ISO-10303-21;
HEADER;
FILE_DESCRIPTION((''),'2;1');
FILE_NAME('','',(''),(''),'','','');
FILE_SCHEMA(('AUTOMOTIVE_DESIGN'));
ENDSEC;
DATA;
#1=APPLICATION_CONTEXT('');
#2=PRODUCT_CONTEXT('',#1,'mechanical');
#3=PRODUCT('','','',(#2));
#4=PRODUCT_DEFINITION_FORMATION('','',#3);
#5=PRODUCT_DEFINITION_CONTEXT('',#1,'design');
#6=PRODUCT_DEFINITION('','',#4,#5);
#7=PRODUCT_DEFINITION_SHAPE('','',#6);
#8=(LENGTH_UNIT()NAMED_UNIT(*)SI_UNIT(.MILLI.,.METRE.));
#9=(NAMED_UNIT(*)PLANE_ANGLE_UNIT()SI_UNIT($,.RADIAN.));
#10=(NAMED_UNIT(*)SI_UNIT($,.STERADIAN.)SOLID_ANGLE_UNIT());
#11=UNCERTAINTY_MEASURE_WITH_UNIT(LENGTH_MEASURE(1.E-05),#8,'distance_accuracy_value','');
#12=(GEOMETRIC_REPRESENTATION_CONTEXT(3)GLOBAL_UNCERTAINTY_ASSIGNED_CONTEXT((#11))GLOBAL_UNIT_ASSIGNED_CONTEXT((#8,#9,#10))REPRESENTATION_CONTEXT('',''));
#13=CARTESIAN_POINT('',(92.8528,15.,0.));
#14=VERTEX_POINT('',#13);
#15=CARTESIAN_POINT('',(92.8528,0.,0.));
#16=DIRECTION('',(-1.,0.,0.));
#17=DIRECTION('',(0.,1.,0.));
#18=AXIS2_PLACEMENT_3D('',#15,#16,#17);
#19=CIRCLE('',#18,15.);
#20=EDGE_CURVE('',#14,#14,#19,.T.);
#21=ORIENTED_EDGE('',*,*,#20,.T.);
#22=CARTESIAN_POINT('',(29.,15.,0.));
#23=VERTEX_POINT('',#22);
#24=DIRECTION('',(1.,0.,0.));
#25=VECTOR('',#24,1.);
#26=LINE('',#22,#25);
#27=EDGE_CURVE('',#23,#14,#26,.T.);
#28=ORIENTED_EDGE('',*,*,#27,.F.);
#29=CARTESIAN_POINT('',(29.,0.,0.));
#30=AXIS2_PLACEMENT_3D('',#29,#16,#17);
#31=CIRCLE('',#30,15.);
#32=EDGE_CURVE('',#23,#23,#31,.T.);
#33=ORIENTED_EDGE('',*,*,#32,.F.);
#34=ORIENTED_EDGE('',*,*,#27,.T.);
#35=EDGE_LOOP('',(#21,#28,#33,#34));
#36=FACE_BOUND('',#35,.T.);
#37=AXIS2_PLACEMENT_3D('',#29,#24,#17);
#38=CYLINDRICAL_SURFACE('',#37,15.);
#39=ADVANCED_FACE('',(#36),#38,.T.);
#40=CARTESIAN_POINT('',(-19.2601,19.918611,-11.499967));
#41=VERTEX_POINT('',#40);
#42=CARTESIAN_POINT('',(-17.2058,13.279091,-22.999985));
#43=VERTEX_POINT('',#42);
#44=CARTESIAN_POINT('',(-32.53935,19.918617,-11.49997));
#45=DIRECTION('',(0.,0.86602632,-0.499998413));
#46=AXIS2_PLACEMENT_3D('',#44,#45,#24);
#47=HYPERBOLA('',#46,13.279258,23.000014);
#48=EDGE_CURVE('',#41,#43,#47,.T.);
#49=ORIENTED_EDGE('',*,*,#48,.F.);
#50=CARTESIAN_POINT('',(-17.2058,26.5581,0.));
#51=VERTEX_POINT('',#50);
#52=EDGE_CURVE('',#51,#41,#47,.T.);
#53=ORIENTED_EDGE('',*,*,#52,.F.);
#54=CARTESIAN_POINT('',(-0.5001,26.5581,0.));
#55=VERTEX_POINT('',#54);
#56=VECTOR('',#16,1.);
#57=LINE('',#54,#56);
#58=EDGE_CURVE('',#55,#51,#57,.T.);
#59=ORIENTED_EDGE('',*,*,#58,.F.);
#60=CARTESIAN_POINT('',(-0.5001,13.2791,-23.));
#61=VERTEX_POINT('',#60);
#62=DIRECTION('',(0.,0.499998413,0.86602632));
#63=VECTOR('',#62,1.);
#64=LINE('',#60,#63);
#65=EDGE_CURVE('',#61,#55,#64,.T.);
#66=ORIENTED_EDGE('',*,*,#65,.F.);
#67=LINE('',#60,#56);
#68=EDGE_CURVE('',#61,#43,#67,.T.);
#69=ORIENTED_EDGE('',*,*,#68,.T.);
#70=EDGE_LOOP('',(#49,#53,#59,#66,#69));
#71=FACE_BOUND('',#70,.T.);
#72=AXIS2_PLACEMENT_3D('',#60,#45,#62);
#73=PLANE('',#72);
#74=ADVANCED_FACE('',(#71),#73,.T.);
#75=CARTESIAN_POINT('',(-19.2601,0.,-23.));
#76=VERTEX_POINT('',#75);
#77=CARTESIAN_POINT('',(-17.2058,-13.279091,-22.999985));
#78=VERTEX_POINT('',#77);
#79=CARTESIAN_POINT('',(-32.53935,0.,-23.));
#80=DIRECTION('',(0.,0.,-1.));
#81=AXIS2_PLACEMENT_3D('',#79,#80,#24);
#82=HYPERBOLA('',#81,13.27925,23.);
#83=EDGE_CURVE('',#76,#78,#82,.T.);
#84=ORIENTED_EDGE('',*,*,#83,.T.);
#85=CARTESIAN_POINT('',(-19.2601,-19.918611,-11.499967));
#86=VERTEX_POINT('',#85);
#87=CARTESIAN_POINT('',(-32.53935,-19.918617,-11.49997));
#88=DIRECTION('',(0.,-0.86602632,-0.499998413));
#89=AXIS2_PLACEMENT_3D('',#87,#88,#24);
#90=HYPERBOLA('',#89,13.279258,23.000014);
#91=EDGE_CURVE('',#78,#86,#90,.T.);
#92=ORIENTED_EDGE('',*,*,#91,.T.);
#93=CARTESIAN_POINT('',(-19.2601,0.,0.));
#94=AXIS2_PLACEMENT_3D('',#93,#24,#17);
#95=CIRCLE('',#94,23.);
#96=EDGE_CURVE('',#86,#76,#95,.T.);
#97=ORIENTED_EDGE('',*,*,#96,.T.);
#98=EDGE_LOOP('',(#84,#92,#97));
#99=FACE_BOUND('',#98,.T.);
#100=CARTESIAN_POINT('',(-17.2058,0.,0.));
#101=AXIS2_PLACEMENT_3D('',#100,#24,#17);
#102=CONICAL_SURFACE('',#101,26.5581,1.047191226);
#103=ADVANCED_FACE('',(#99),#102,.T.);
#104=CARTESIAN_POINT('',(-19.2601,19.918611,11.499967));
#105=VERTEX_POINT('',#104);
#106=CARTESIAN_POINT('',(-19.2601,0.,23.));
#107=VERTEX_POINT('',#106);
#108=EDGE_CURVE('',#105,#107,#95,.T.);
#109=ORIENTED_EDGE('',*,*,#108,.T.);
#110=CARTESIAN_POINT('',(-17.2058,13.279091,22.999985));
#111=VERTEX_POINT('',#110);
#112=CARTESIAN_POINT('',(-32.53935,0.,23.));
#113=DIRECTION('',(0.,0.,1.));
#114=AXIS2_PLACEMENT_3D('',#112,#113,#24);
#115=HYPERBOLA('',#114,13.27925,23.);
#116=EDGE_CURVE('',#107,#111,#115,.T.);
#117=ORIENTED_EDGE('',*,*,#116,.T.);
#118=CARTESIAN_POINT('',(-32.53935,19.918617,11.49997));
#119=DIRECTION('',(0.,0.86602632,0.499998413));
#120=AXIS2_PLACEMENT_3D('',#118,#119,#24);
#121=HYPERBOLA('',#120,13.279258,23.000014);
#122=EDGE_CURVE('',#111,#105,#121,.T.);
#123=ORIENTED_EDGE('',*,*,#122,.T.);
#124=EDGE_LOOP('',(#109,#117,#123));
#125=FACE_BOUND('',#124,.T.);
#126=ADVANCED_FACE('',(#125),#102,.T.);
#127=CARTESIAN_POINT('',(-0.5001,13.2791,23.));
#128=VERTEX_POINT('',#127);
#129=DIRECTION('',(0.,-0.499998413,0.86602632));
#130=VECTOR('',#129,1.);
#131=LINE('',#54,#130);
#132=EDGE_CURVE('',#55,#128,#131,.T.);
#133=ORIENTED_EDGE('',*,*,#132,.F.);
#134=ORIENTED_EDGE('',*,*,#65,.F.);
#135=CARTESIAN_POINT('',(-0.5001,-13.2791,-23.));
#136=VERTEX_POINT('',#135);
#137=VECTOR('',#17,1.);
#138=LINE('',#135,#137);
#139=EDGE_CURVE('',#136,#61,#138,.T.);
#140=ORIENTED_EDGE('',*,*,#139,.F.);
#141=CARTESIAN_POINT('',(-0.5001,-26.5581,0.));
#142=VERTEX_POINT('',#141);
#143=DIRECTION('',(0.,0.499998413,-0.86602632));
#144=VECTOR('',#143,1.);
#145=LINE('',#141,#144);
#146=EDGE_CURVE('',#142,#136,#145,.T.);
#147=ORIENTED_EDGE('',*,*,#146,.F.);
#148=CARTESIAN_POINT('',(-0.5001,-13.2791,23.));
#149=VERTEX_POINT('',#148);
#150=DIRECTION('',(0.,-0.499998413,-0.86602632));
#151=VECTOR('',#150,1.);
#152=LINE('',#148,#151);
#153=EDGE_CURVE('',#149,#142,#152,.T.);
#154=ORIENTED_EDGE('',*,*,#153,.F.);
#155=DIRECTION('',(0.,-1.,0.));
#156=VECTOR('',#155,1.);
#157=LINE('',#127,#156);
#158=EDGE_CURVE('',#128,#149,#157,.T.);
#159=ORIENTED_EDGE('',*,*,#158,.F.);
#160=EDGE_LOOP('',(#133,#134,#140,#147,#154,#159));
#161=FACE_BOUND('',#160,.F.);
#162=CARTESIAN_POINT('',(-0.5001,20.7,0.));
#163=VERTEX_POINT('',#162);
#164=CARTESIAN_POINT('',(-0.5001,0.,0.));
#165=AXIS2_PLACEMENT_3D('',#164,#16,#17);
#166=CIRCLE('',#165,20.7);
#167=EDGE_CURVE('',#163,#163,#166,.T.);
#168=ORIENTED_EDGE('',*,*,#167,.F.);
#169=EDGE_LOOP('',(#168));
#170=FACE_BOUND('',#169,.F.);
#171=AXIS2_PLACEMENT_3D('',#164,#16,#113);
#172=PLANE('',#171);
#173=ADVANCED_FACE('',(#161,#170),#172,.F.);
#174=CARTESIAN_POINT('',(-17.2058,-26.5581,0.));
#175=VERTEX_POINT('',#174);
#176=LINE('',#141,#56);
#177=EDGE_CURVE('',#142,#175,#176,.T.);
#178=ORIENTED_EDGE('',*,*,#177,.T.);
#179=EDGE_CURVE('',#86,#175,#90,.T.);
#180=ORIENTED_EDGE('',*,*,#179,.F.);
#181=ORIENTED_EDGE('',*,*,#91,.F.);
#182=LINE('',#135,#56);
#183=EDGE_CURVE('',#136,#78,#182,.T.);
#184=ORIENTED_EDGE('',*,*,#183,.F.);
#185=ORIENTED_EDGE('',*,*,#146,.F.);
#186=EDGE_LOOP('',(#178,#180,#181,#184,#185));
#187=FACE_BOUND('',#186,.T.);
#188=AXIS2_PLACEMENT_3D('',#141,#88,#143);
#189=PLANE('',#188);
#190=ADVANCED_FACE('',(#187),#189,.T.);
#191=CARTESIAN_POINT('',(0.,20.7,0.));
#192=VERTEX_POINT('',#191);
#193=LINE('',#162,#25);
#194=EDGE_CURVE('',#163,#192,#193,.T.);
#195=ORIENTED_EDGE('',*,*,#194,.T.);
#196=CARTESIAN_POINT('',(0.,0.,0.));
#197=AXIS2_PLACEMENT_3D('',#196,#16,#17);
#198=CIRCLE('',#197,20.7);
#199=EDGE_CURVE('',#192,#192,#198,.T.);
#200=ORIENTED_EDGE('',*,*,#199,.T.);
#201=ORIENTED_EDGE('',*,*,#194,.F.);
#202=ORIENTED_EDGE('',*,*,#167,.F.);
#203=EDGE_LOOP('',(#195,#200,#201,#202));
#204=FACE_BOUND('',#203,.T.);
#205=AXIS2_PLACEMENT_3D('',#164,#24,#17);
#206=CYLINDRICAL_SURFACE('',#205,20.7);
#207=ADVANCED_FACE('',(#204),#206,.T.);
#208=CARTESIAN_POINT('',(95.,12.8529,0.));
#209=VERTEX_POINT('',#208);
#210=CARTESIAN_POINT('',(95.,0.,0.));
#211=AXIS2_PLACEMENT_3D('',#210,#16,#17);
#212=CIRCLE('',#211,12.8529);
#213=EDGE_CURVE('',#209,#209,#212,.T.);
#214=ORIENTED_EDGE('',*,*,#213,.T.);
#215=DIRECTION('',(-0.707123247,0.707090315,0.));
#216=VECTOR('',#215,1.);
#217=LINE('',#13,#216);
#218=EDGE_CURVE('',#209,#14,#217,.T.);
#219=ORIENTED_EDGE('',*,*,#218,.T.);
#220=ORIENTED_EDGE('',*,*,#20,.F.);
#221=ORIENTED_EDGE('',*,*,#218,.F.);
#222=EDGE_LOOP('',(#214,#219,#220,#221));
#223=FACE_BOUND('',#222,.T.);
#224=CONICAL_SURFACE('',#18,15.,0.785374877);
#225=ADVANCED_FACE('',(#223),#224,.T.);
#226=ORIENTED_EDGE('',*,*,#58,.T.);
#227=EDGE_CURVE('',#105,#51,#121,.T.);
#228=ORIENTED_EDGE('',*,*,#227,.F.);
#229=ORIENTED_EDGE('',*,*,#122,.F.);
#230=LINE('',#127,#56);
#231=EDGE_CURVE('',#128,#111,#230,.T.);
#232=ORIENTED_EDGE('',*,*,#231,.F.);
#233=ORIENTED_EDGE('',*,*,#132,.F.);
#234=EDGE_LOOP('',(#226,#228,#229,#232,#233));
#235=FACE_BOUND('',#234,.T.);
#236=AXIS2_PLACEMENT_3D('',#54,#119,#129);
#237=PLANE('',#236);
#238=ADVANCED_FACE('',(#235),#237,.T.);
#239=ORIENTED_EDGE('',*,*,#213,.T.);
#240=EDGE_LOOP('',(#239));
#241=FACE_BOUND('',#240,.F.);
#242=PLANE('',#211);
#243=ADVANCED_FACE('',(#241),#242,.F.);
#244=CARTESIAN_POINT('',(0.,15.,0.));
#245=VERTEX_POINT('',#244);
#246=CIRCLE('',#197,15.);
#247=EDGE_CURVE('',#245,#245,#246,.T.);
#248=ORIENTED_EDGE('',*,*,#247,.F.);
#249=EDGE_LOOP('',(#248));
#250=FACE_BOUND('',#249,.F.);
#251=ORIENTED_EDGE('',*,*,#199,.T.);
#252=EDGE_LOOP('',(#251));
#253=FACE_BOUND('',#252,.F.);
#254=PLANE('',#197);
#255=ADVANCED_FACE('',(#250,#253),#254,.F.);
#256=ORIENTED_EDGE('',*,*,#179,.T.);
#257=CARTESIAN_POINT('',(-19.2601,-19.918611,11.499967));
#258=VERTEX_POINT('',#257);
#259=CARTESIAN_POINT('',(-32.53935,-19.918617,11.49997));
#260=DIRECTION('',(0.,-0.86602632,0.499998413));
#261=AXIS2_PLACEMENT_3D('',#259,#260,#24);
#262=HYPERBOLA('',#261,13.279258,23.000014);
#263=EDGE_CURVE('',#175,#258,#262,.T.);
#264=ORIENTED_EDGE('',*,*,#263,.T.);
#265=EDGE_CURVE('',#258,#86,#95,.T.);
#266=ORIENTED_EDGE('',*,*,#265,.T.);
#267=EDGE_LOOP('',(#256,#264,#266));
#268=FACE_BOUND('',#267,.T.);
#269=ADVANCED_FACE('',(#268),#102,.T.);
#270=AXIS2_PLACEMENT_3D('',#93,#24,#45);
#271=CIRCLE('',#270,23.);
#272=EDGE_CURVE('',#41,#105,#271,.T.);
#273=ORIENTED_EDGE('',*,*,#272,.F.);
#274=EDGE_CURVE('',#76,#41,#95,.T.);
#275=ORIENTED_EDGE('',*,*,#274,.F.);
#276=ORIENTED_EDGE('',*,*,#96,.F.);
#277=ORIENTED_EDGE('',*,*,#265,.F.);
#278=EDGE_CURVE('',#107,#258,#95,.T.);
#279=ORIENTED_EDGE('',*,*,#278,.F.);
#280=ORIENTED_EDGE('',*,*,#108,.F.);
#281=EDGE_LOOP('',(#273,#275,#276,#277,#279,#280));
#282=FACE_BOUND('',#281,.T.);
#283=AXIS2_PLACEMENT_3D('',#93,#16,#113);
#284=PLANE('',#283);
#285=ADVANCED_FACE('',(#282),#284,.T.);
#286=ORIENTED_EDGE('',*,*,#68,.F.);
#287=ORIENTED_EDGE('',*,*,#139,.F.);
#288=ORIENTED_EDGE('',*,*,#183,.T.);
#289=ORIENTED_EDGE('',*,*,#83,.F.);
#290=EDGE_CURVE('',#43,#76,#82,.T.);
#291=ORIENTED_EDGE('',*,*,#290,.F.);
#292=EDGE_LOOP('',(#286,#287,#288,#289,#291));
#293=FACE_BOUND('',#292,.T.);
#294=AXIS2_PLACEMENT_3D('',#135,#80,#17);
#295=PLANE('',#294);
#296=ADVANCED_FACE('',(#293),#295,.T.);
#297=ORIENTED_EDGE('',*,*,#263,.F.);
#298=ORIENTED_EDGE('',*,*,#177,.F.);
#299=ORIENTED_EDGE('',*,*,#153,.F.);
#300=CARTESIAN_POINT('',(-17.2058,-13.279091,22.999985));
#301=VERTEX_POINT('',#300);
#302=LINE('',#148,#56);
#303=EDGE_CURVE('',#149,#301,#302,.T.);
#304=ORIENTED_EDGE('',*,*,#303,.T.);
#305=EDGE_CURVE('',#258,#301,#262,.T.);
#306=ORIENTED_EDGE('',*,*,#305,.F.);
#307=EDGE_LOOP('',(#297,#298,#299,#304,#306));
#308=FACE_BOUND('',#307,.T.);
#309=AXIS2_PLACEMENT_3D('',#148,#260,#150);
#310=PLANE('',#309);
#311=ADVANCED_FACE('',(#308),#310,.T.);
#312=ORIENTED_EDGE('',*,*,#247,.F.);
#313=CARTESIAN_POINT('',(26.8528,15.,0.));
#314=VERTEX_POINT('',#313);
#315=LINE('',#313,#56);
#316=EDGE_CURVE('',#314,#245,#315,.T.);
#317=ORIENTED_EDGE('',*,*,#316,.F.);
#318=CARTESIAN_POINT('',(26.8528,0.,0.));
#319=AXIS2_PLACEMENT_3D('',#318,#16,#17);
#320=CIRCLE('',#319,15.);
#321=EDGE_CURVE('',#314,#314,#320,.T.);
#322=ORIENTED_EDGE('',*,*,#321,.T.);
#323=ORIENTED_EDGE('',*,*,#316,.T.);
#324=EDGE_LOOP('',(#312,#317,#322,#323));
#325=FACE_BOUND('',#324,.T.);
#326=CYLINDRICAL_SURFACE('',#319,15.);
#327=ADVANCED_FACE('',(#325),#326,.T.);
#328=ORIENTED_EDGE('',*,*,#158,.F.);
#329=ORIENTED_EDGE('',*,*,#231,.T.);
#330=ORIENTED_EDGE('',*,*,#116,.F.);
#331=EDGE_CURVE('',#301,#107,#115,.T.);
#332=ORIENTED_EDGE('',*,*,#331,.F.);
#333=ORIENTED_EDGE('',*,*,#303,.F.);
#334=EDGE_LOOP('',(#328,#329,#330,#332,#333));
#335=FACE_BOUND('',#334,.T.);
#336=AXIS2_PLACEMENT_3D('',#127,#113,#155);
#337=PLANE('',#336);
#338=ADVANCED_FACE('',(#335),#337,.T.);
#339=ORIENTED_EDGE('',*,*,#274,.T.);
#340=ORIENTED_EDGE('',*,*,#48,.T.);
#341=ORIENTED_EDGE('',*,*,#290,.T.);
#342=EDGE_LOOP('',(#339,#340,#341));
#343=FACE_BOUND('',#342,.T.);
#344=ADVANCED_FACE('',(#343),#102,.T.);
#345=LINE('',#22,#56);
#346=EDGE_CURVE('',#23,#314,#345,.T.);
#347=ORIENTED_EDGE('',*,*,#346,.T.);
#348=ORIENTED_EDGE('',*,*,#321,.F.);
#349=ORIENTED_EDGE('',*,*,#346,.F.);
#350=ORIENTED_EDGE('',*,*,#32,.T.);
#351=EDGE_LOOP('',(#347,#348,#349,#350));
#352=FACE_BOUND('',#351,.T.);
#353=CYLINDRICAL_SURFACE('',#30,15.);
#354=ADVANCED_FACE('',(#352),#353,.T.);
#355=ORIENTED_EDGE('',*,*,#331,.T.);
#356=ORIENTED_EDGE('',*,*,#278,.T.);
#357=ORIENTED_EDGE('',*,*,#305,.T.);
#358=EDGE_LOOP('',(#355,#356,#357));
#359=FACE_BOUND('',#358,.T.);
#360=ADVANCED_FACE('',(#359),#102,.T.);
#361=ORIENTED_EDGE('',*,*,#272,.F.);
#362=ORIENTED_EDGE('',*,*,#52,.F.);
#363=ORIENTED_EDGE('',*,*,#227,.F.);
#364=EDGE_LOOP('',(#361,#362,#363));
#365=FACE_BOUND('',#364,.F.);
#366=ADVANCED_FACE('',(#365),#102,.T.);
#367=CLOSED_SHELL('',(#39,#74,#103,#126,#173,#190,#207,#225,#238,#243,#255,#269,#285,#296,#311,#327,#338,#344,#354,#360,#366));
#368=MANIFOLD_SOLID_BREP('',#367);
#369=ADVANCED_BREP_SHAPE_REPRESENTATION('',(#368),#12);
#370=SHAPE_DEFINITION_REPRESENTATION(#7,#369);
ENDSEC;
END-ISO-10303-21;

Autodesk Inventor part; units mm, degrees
ref_plane "YZ Plane" through (0, 0, 0) normal (1, 0, 0) x (0, 1, 0)
ref_plane "XZ Plane" through (0, 0, 0) normal (0, 1, 0) x (-1, 0, 0)
ref_plane "XY Plane" through (0, 0, 0) normal (0, 0, 1) x (1, 0, 0)
sketch "Sketch1" plane through (0, 0, 0) normal (0, 0, 1) x (1, 0, 0)
  line L0 (0, 20.7) -> (0, 15)
  line L1 (29, 15) -> (95, 15)
  line L2 (95, 15) -> (95, 0)
  line L3 (95, 0) -> (-0.5001, 0)
  line L4 (-10.0501, 0) -> (123.65, 0) projected
  line L5 (-0.5001, 0) -> (-0.5001, 20.7)
  line L6 (-0.5001, 20.7) -> (0, 20.7)
  line L7 (29, 15) -> (26.8528, 15)
  line L8 (26.8528, 15) -> (0, 15)
  line L9 (0, -2.07) -> (0, 26.91) projected
  dimension "d0" = 95
  dimension "d1" = 66
  dimension "d2" = 30
  dimension "d9" = 0.5001
  dimension "d10" = 41.4
  dimension "d13" = 2.1472
  dimension "d14" = 30
revolve "Body" add sketch "Sketch1" angle 360 about axis through (95, 0, 0) along (-1, 0, 0)
sketch "Sketch2" plane through (-0.5001, 0, 0) normal (-1, 0, 0) x (0, 0, 1)
  line L0 (0, 26.5581) -> (23, 13.2791)
  line L1 (23, 13.2791) -> (23, -13.2791)
  line L2 (23, -13.2791) -> (0, -26.5581)
  line L3 (0, -26.5581) -> (-23, -13.2791)
  line L4 (-23, -13.2791) -> (-23, 13.2791)
  line L5 (-23, 13.2791) -> (0, 26.5581)
  point P0 (0, 0)
  point P1 (0, 0)
  dimension "d11" = 46
extrude "Head" add sketch "Sketch2" along normal blind 18.76
sketch "Sketch4" plane through (0, 0, 0) normal (0, 0, 1) x (1, 0, 0)
  line L0 (-19.2601, 23) -> (-19.2601, 26.5581)
  line L1 (-19.2601, 26.5581) -> (-17.2058, 26.5581)
  line L2 (-17.2058, 26.5581) -> (-19.2601, 23)
  line L3 (-21.1361, 0) -> (5.1279, 0) projected
  line L4 (-0.5001, 26.5581) -> (-19.2601, 26.5581) projected
  line L5 (-19.2601, 13.2791) -> (-19.2601, 26.5581) projected
  dimension "d5" = 30
  dimension "d19" = 46
revolve "Chamfer1" cut sketch "Sketch4" angle 360 about axis through (-10, 0, 0) along (1, 0, 0)
thread "Thread" size "M30x3.5" class "6g" standard "ISO Metric profile" length 66
chamfer "Chamfer2" distance 2.1471 distance2 2.1472 1 edges at (95, -15, 0) measured on face at (95, -3.9999, 1.1966)
equation "\"d0\" = NLG"
equation "\"d1\" = GEL"
equation "\"d2\" = GD"
equation "\"d10\" = SD2"
equation "\"d14\" = BDM"
equation "\"d11\" = SW"
equation "\"d3\" = KOH - SD"
equation "\"d5\" = ANG1"
equation "\"d19\" = SW0"
equation "\"d15\" = GEL"
equation "\"d6\" = -0.5 * SPD + 0.5 * GD"
equation "\"NLG\" = 95"
equation "\"GD\" = NND"
equation "\"BDM\" = NND"
equation "\"KOH\" = 19.26"
equation "\"GEL\" = 66"
equation "\"SW\" = 46"
equation "\"SW0\" = 46"
equation "\"SPD\" = NND - 1.2269 * TPU"
equation "\"SD2\" = 0.9 * SW"
equation "\"SD\" = 0.5"
equation "\"ANG1\" = 30deg"
equation "\"GAL\" = 0.61345 * TPU"
equation "\"GUL\" = 0.61345 * TPU"
equation "\"RR\" = 1.7"
equation "\"d20\" = -NLG"
equation "\"TOA\" = 30deg"
equation "\"PTC\" = TPU"
equation "\"GD1\" = THREADDIA - 1.2269 * TPU"
equation "\"TPU\" = 3.5"
equation "\"E0\" = 1.155 * SW"
equation "\"SDH\" = 44.98"
equation "\"NND\" = 30"
equation "\"THREADDIA\" = 30"
properties part number "BS 3692 - M30 x 90"
